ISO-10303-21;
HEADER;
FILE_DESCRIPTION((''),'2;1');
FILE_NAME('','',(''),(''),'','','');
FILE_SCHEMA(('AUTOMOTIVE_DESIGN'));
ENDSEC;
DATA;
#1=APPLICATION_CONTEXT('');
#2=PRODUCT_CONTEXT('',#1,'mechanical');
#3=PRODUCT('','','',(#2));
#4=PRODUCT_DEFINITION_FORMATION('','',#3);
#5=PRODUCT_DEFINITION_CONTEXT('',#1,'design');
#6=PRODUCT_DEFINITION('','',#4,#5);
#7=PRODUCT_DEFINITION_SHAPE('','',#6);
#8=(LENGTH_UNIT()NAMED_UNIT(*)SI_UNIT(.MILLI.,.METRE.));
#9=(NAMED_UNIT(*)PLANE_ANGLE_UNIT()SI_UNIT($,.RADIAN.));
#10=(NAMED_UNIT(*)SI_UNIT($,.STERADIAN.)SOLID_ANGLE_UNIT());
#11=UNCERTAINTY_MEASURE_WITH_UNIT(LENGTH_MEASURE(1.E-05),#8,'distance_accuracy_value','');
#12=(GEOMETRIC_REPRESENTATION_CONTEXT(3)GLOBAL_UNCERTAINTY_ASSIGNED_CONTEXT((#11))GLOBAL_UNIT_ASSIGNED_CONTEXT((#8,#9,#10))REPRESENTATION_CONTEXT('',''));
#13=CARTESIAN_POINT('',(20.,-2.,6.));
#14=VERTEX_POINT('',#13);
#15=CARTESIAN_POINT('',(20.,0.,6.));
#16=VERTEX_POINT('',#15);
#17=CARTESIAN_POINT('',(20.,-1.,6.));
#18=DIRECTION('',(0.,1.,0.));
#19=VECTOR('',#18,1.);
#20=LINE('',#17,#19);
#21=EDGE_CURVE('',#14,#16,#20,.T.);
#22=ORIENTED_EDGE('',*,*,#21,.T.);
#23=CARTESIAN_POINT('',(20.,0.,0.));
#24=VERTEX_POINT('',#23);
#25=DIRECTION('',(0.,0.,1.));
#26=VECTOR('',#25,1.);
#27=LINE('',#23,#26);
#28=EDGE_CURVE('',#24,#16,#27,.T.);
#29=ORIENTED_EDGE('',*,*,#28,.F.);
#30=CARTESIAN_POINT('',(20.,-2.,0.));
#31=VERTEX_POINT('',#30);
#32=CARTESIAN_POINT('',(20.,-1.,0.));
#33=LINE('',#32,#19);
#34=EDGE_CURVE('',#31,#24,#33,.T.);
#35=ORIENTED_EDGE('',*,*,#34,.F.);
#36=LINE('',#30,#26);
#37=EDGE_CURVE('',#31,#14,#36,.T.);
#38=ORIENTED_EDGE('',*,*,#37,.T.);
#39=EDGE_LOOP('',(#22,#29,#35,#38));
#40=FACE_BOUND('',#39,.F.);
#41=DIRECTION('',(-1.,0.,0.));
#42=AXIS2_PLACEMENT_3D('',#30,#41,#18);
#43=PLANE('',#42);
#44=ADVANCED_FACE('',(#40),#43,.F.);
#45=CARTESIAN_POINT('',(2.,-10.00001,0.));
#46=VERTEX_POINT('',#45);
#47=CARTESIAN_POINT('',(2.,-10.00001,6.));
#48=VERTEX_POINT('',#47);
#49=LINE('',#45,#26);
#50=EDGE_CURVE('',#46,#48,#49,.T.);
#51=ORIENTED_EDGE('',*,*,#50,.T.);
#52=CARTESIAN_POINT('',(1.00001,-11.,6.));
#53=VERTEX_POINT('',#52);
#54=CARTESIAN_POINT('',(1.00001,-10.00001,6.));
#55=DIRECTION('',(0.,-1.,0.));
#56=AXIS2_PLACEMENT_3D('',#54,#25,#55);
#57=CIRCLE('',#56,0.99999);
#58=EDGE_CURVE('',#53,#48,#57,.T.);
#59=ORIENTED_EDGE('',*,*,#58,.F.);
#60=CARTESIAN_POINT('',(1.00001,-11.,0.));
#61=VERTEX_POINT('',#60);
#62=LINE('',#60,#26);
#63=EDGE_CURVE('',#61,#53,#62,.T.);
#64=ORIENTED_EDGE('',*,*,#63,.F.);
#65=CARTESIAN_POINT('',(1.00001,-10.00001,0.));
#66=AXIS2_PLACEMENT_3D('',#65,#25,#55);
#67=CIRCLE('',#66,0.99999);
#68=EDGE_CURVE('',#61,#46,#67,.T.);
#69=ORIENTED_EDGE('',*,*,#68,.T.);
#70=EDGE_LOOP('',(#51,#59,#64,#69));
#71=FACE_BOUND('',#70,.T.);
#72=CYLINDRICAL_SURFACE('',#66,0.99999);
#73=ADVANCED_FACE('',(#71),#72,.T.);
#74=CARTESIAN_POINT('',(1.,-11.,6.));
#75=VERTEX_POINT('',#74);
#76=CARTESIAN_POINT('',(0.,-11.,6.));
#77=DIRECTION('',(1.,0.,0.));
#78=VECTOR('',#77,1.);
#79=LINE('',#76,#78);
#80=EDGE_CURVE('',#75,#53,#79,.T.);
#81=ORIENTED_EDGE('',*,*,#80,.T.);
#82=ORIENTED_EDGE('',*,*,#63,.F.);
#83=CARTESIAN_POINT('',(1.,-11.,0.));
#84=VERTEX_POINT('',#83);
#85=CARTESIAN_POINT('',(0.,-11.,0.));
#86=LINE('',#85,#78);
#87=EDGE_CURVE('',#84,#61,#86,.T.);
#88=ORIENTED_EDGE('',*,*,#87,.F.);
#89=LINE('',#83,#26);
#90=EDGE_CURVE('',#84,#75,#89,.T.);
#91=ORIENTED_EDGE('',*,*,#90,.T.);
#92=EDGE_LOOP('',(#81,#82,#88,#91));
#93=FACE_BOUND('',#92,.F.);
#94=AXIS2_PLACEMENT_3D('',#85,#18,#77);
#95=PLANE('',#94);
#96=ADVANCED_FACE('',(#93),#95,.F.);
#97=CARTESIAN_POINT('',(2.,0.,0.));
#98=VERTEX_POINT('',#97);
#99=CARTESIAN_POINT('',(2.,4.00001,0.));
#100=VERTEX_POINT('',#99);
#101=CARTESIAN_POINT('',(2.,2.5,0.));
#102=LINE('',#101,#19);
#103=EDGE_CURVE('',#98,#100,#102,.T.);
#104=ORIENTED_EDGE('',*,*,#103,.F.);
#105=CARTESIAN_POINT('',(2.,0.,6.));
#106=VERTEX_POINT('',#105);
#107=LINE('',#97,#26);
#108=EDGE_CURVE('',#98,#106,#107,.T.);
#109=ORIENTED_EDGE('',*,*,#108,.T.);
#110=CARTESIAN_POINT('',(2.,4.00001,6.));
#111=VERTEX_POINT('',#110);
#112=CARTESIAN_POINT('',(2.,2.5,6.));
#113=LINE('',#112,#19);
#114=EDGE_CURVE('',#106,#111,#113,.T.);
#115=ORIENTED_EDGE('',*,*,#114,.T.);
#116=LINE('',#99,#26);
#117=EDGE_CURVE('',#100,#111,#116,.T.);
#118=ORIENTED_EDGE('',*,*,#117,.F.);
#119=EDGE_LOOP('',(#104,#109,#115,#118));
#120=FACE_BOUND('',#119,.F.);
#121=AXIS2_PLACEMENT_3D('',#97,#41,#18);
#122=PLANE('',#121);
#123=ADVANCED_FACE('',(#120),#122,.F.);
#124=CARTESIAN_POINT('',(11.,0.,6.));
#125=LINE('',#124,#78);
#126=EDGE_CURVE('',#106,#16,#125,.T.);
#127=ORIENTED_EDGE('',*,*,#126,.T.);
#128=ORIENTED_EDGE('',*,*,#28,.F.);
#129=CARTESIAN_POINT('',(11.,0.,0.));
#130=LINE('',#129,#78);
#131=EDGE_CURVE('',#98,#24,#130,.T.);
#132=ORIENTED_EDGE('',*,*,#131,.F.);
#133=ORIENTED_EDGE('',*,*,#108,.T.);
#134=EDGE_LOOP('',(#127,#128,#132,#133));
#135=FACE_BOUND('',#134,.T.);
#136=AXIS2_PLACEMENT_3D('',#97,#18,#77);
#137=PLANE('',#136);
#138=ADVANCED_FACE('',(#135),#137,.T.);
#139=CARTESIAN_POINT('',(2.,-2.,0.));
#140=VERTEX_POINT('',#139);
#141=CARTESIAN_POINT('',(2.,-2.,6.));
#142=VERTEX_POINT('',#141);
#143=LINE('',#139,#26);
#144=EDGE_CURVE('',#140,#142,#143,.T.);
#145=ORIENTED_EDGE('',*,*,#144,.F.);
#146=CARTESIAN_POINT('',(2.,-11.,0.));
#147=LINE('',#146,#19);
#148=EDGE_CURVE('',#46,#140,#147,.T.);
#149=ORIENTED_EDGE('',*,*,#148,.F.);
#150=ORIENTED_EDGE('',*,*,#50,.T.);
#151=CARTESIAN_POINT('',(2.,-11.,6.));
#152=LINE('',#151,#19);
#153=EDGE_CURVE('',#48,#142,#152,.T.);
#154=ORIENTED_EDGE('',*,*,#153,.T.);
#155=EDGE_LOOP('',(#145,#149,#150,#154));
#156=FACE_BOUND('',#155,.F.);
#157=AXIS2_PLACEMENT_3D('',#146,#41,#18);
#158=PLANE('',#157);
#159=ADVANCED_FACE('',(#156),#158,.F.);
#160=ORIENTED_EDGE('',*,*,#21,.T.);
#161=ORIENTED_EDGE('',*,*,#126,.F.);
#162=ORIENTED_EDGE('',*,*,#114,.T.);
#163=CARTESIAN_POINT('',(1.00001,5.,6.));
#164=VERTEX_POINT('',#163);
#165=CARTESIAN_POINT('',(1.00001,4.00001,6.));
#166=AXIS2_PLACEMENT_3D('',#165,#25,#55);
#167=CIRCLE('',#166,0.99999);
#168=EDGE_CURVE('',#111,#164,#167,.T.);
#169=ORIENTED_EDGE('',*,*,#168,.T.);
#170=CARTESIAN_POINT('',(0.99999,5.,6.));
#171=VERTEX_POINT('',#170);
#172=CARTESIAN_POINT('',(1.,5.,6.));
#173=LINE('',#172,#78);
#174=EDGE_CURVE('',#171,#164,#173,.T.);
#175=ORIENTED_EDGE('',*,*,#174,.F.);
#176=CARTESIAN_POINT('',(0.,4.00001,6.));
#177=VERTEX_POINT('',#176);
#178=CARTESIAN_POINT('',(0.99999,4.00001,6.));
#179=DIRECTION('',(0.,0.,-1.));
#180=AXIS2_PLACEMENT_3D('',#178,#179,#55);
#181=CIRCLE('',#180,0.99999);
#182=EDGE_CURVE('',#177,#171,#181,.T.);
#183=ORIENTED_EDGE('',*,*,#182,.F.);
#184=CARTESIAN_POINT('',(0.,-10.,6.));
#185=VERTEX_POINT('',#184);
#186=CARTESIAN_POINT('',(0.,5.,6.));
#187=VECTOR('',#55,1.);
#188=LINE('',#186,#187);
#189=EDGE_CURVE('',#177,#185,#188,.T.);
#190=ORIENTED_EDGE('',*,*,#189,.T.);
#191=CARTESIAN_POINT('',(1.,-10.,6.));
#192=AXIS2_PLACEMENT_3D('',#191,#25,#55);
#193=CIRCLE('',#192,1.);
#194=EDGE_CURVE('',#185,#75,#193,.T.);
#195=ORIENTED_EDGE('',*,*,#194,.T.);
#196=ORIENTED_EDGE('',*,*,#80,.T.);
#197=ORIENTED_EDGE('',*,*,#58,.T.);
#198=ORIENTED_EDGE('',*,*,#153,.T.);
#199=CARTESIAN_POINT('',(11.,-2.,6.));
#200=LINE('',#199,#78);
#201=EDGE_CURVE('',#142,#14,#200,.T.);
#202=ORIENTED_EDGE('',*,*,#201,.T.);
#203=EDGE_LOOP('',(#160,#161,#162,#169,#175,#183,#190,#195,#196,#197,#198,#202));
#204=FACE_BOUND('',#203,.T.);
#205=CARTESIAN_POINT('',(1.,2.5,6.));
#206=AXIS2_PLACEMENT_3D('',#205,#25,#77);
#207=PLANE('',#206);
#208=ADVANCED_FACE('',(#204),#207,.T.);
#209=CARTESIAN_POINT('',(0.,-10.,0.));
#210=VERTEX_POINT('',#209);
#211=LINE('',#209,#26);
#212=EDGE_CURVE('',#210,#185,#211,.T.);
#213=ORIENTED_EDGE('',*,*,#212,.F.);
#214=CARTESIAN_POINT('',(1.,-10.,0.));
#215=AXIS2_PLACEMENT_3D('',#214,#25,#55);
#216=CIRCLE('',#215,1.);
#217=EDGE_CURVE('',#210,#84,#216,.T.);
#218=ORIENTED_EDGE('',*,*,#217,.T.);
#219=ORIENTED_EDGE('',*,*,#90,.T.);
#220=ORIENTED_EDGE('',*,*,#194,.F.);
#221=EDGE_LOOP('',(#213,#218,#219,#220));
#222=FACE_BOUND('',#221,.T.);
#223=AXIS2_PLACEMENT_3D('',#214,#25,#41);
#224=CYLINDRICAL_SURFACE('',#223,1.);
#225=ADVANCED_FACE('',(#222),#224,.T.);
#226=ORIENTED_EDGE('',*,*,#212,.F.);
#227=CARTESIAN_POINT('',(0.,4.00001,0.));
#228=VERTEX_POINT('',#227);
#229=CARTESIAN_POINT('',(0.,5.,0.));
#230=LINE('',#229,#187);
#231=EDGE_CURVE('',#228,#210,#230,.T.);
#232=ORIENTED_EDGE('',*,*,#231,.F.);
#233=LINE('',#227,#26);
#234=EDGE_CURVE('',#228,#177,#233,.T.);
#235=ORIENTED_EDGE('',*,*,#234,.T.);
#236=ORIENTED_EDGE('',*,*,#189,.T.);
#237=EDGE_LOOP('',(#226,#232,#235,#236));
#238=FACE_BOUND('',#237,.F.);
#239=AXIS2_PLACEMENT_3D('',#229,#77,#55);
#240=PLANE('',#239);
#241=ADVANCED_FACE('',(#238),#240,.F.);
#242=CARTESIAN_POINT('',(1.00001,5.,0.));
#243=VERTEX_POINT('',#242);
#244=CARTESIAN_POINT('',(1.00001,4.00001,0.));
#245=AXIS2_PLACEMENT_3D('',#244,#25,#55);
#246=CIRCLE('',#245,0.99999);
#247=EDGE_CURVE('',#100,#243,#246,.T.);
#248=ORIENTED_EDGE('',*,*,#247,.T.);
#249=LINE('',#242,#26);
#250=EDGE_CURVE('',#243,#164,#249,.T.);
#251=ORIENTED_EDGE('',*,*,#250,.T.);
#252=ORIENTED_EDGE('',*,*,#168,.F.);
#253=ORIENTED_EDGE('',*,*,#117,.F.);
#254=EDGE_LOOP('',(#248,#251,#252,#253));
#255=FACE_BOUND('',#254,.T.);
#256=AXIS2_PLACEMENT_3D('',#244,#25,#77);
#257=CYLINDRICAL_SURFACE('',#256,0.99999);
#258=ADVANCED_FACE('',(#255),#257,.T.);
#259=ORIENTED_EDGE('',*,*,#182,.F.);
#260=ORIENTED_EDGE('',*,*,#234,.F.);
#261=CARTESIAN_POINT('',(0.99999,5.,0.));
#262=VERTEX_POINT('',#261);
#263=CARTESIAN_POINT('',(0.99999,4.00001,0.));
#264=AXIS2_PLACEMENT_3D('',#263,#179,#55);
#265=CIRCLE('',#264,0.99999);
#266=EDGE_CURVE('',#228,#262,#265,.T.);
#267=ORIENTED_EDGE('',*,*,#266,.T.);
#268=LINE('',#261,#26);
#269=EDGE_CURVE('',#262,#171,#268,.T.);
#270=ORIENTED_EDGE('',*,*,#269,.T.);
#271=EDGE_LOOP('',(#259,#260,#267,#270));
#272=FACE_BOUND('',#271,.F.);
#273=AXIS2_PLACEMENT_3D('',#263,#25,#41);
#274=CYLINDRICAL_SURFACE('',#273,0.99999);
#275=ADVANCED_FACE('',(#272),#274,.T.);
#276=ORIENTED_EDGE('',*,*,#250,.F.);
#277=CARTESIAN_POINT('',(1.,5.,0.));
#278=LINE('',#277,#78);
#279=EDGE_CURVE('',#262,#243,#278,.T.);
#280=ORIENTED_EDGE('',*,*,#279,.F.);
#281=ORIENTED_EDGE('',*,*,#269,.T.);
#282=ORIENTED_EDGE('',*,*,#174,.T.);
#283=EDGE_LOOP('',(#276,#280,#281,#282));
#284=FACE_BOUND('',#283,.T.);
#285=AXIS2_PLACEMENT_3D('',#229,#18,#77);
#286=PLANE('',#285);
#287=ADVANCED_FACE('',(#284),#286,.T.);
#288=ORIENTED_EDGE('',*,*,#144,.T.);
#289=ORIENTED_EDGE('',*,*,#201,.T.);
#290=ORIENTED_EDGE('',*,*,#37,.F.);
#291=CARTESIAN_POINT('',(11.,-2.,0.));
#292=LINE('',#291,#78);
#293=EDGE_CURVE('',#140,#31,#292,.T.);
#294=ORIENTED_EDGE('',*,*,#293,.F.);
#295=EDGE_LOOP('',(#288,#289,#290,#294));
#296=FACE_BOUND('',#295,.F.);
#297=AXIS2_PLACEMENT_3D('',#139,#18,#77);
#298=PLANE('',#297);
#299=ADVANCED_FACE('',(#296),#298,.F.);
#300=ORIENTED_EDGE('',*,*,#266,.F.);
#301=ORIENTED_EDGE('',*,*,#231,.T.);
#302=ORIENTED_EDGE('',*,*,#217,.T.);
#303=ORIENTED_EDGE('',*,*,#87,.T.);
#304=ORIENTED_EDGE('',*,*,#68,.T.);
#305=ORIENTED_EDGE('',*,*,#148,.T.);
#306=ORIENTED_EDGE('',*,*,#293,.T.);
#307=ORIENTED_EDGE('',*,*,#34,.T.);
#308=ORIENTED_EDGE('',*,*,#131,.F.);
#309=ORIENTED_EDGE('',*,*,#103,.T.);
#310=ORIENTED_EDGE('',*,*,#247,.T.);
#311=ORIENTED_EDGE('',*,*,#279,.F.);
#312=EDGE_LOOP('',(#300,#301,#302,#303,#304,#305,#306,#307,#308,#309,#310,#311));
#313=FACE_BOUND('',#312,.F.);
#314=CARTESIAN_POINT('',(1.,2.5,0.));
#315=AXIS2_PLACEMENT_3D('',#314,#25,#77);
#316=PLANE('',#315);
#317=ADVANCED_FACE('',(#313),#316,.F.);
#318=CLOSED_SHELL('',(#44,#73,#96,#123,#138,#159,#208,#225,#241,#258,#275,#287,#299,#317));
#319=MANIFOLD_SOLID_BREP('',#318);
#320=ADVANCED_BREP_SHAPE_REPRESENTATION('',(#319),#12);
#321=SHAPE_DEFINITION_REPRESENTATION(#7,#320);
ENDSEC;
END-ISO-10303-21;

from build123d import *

# Parameters (mm, degrees)
F0_W     = 2
F0_H     = 5
F0_W_2   = 18
F0_H_2   = 2
F1_DEPTH = 6
F2_R     = 0.99999
F3_R     = 1
F4_R     = 0.99999


# Not quite as in the source:
# - a fillet or chamfer is up to 0.001 mm smaller than in the source, because OpenCascade refuses the exact size


with BuildPart() as f1:
    # F0 (on Top) → F1 (new body)
    with BuildSketch(Plane.XY):
        with Locations((1, 2.5)):
            Rectangle(F0_W, F0_H)
        with Locations((11, -1)):
            Rectangle(F0_W_2, F0_H_2)
        Polygon((2, 0), (0, 0), (0, -11), (2, -11), (2, -2), align=None)
    extrude(amount=F1_DEPTH)

    # F2 (radius 1 in the source; OpenCascade refuses exactly that, so slightly less here)
    f2_edges = [f1.edges().sort_by_distance(p)[0] for p in [
        (0, 5, 3),
        (2, 5, 3),
    ]]
    fillet(f2_edges, radius=F2_R)

    # F3
    f3_edges = [f1.edges().sort_by_distance(p)[0] for p in [
        (0, -11, 3),
    ]]
    fillet(f3_edges, radius=F3_R)

    # F4 (radius 1 in the source; OpenCascade refuses exactly that, so slightly less here)
    f4_edges = [f1.edges().sort_by_distance(p)[0] for p in [
        (2, -11, 3),
    ]]
    fillet(f4_edges, radius=F4_R)


solid = f1.part
